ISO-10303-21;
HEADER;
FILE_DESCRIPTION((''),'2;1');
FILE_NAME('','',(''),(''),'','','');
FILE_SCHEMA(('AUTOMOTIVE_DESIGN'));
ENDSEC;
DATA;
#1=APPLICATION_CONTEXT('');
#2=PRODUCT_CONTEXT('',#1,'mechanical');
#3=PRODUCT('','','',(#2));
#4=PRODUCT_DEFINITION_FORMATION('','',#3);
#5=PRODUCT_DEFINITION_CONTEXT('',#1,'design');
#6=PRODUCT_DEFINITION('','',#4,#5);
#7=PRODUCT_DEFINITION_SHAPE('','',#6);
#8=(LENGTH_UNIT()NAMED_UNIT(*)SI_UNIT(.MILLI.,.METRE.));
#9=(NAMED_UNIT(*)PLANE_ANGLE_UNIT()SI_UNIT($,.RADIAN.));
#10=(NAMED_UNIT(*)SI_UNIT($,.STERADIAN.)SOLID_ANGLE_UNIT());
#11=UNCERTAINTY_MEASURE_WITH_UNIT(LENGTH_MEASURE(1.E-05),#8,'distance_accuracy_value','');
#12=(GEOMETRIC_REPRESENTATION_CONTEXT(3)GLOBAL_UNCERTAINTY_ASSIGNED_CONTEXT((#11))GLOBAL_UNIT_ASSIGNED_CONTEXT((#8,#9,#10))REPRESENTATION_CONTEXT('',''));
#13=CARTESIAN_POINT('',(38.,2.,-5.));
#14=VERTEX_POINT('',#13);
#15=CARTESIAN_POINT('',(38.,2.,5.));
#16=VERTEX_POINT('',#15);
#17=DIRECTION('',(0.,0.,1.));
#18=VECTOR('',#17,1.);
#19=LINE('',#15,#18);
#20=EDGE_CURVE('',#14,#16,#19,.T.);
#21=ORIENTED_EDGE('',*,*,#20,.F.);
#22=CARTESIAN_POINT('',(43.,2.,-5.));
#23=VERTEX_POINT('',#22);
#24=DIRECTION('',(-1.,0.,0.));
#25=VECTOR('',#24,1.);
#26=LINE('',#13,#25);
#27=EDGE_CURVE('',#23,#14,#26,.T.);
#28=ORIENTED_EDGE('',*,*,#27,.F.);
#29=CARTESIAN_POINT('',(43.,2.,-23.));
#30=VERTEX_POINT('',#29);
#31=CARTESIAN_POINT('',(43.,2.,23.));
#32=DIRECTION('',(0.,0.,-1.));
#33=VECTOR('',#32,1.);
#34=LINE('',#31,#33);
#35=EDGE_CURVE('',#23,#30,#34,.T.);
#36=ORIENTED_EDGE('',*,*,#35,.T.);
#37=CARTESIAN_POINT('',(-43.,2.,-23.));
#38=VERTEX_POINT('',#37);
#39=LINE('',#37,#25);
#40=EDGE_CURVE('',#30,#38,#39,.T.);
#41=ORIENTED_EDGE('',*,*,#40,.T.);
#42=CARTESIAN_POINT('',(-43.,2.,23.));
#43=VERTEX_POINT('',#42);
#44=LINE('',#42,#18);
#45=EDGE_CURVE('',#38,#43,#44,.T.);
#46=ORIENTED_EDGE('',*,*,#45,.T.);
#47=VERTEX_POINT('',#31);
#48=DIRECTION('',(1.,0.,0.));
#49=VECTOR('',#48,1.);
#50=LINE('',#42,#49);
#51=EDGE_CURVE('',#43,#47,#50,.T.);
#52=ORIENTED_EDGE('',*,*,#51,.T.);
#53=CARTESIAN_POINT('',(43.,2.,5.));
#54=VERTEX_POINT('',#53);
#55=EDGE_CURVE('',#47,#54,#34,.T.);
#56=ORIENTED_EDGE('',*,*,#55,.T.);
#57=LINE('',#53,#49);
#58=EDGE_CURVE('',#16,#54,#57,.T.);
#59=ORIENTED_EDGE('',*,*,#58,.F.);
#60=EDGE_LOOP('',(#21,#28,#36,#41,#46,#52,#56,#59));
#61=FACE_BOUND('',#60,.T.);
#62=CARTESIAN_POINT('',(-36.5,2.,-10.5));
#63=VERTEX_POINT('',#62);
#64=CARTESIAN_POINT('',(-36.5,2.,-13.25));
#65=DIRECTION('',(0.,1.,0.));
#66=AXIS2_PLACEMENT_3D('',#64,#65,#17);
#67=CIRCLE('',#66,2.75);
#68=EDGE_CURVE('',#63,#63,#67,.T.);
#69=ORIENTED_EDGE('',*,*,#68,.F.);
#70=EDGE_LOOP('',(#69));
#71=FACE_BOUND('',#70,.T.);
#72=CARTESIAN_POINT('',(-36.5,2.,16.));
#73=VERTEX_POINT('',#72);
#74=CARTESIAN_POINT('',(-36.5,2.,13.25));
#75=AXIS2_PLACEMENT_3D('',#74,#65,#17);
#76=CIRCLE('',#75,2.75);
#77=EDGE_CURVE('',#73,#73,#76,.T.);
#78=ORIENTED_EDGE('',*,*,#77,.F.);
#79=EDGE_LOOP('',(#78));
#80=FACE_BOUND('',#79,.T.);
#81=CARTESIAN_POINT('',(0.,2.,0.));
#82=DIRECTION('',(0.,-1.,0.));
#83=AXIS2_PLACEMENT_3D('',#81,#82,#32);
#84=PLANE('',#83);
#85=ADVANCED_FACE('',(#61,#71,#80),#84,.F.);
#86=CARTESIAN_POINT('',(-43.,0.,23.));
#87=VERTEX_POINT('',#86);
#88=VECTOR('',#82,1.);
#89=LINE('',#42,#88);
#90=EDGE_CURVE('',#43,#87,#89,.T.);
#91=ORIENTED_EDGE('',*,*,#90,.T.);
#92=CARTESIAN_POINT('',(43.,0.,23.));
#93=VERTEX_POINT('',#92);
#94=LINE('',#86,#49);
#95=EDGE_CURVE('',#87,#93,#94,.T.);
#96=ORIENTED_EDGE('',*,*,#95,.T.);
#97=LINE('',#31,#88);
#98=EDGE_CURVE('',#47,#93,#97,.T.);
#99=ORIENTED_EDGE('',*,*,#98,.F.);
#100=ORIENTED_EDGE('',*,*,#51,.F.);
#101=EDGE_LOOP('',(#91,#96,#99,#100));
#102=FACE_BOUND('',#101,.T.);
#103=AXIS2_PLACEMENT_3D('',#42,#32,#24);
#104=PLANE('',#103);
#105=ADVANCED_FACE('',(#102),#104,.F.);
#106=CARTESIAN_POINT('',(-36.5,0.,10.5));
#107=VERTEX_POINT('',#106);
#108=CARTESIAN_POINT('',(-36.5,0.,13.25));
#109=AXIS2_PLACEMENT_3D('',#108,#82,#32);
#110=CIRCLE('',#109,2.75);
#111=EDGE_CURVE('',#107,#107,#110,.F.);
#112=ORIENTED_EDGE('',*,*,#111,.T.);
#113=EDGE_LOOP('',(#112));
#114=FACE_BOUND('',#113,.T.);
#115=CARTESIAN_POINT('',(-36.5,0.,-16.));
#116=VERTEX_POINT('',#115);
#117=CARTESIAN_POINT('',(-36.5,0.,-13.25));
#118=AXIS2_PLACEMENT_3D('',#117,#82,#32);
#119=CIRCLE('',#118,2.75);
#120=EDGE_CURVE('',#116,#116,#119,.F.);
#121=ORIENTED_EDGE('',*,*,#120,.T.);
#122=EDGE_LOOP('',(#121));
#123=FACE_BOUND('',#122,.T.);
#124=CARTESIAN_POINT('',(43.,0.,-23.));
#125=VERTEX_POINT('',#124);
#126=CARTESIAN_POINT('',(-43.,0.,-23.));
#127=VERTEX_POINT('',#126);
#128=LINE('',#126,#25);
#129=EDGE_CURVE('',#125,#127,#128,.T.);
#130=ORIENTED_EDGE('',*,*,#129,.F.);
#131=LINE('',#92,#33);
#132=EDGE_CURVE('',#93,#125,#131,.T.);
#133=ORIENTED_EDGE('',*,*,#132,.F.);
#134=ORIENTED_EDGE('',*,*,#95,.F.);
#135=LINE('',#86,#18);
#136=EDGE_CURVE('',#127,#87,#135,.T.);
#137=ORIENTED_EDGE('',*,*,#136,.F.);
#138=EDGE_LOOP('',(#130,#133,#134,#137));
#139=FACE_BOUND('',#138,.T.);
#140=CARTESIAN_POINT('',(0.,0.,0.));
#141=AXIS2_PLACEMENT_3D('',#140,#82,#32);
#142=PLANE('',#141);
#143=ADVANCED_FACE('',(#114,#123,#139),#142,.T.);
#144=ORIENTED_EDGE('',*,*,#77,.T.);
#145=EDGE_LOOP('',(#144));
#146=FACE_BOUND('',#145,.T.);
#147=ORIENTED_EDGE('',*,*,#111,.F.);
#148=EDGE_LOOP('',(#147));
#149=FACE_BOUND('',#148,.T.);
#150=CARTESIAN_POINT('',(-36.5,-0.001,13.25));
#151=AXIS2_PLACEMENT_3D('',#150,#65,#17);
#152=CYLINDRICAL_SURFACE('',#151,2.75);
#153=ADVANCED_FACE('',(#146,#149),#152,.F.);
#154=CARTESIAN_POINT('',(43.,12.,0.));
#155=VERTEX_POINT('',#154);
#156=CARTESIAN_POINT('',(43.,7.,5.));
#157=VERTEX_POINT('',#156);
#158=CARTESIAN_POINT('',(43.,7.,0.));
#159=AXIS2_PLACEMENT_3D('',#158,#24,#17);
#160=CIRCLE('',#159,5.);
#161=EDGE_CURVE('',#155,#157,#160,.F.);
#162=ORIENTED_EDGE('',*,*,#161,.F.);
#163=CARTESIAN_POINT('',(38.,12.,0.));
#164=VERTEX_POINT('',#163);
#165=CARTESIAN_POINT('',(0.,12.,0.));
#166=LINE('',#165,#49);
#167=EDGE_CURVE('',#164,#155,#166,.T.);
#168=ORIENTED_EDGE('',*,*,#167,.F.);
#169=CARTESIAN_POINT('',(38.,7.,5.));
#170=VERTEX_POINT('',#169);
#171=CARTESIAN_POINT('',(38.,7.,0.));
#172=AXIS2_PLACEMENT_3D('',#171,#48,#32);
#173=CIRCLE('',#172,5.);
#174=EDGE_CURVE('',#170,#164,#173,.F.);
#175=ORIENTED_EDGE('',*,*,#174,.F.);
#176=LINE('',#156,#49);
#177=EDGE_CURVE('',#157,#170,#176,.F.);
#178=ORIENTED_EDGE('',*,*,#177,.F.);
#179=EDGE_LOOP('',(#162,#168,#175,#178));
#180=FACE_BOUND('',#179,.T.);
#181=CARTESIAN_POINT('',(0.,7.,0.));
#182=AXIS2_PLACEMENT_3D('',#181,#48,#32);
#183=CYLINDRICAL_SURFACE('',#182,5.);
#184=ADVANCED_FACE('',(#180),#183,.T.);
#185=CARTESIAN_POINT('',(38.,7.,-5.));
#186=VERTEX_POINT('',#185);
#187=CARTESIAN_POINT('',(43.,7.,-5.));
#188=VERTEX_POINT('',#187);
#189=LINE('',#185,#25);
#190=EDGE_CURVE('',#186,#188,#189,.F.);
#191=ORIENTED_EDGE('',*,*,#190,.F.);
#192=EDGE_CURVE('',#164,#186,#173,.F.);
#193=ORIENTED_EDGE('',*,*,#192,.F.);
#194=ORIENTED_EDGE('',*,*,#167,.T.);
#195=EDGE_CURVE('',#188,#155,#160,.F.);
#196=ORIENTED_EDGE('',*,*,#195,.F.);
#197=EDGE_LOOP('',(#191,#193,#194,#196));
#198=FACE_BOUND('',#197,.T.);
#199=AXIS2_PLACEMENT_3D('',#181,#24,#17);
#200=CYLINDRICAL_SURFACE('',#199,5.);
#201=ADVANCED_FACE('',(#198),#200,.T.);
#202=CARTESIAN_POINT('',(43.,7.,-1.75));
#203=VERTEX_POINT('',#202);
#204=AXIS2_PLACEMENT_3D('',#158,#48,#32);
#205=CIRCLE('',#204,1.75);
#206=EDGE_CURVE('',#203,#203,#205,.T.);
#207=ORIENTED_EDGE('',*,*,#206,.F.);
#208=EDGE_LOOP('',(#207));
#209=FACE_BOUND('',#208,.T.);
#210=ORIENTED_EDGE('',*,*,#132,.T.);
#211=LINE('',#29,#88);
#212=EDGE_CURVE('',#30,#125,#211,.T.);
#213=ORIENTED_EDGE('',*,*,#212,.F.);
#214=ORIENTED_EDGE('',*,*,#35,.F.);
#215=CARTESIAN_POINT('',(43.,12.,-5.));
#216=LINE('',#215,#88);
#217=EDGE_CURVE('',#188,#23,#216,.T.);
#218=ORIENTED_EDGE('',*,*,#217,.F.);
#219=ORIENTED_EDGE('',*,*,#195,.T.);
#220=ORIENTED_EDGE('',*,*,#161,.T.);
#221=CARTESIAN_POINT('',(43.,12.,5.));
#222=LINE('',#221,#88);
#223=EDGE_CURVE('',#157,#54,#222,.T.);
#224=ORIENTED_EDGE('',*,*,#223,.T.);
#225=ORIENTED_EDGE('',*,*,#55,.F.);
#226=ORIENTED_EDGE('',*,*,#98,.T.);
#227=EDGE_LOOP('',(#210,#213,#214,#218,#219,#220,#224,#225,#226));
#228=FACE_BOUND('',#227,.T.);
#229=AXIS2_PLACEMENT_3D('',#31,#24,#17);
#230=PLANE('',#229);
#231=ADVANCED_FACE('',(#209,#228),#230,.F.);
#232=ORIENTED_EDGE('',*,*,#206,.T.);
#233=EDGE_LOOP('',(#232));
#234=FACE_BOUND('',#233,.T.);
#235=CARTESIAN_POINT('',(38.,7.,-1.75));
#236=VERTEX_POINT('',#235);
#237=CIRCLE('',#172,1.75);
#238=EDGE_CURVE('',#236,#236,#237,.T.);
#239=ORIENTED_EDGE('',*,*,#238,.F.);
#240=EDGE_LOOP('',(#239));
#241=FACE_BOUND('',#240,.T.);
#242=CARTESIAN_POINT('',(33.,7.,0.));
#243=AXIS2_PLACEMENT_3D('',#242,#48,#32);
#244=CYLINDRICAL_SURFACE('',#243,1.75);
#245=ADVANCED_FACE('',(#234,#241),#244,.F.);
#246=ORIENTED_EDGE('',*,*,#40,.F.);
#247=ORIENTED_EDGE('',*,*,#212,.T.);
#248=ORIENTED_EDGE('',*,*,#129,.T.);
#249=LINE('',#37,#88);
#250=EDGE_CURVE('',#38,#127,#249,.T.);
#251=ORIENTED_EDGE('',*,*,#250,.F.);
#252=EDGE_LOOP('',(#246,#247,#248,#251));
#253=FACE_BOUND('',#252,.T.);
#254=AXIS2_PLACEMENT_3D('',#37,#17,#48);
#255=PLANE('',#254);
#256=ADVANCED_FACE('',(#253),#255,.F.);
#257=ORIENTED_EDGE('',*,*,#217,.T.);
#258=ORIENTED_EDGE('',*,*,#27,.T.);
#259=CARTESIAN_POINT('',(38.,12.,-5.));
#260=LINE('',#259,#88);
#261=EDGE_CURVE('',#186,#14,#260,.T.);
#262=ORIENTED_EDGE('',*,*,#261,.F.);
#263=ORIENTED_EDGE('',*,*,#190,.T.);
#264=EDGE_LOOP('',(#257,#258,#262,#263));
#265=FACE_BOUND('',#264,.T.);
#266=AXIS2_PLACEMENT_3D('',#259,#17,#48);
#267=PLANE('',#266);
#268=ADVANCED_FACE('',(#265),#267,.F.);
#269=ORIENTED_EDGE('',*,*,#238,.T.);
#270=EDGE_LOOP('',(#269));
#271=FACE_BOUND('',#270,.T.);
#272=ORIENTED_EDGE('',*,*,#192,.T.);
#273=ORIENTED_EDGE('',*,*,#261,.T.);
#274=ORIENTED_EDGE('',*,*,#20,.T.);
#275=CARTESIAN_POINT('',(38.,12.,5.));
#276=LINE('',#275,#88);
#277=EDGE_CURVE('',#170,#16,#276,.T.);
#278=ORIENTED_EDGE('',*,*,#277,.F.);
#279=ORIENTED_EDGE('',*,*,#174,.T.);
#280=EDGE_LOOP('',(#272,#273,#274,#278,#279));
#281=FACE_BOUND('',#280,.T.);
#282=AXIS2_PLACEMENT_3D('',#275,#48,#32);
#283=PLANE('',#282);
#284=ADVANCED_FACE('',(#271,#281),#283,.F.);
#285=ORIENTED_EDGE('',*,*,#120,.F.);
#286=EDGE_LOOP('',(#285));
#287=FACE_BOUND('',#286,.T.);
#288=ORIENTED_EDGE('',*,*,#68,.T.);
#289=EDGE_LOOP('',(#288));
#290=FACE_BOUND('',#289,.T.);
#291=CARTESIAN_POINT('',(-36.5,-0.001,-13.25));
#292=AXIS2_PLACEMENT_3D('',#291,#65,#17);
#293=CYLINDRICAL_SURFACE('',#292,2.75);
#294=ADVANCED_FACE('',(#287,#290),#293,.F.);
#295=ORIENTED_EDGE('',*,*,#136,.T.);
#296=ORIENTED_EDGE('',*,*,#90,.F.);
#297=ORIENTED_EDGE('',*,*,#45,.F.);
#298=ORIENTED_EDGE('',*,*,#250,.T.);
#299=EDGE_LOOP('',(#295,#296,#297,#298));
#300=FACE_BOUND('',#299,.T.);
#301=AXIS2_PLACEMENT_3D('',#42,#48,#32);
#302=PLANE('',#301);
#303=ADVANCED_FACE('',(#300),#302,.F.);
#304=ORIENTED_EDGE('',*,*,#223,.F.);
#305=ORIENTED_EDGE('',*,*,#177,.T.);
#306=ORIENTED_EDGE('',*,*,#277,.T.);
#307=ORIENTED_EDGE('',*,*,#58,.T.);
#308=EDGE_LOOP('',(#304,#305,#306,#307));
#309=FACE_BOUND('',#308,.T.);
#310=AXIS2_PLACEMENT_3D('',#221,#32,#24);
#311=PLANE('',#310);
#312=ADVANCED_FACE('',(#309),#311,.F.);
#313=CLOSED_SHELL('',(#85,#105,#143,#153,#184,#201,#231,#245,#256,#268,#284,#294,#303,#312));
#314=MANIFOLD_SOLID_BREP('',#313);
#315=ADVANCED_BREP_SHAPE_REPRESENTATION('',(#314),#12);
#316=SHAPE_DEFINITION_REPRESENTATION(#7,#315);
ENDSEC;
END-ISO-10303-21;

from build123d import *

# Parameters (mm, degrees)
SKETCH1_W           = 86
SKETCH1_H           = 46
BOSS_EXTRUDE1_DEPTH = 2
CUT_EXTRUDE1_REACH  = 50.806
SKETCH2_R           = 2.75
SKETCH3_W           = 5
SKETCH3_H           = 10
BOSS_EXTRUDE2_DEPTH = 10
SKETCH4_R           = 1.75
CUT_EXTRUDE2_DEPTH  = 10
FILLET1_R           = 5


with BuildPart() as part:
    # Sketch1 → Boss-Extrude1 (new body)
    with BuildSketch(Plane(origin=(0, 0, 0), x_dir=(1, 0, 0), z_dir=(0, 1, 0))):
        Rectangle(SKETCH1_W, SKETCH1_H)
    extrude(amount=BOSS_EXTRUDE1_DEPTH)

    # Sketch2 → Cut-Extrude1 (cut, up to next)
    with BuildSketch(Plane(origin=(0, 2, 0), x_dir=(1, 0, 0), z_dir=(0, 1, 0)), mode=Mode.PRIVATE) as cut_extrude1_sk1:
        with Locations(Location((-36.5, 13.25, 0), (0, 0, 270))):
            Circle(SKETCH2_R)
    cut_extrude1_tool1 = extrude(cut_extrude1_sk1.sketch, amount=-CUT_EXTRUDE1_REACH, mode=Mode.PRIVATE) & part.part
    # Sketch2 → Cut-Extrude1 (cut, up to next)
    with BuildSketch(Plane(origin=(0, 2, 0), x_dir=(1, 0, 0), z_dir=(0, 1, 0)), mode=Mode.PRIVATE) as cut_extrude1_sk2:
        with Locations(Location((-36.5, -13.25, 0), (0, 0, 270))):
            Circle(SKETCH2_R)
    cut_extrude1_tool2 = extrude(cut_extrude1_sk2.sketch, amount=-CUT_EXTRUDE1_REACH, mode=Mode.PRIVATE) & part.part
    add(cut_extrude1_tool1.solids().sort_by_distance((-36.5, 2, -13.25))[0], mode=Mode.SUBTRACT)
    add(cut_extrude1_tool2.solids().sort_by_distance((-36.5, 2, 13.25))[0], mode=Mode.SUBTRACT)

    # Sketch3 → Boss-Extrude2 (add)
    with BuildSketch(Plane(origin=(0, 2, 0), x_dir=(1, 0, 0), z_dir=(0, 1, 0))):
        with Locations((40.5, 0)):
            Rectangle(SKETCH3_W, SKETCH3_H)
    extrude(amount=BOSS_EXTRUDE2_DEPTH)

    # Sketch4 → Cut-Extrude2 (cut)
    with BuildSketch(Plane(origin=(43, 0, 0), x_dir=(0, 0, -1), z_dir=(1, 0, 0))):
        with Locations((0, 7)):
            Circle(SKETCH4_R)
    extrude(amount=-CUT_EXTRUDE2_DEPTH, mode=Mode.SUBTRACT)

    # Fillet1
    fillet1_edges = [part.edges().sort_by_distance(p)[0] for p in [
        (40.5, 12, -5),
        (40.5, 12, 5),
    ]]
    fillet(fillet1_edges, radius=FILLET1_R - 0.0001)  # a hair under: the kernel refuses the full size


solid = part.part
